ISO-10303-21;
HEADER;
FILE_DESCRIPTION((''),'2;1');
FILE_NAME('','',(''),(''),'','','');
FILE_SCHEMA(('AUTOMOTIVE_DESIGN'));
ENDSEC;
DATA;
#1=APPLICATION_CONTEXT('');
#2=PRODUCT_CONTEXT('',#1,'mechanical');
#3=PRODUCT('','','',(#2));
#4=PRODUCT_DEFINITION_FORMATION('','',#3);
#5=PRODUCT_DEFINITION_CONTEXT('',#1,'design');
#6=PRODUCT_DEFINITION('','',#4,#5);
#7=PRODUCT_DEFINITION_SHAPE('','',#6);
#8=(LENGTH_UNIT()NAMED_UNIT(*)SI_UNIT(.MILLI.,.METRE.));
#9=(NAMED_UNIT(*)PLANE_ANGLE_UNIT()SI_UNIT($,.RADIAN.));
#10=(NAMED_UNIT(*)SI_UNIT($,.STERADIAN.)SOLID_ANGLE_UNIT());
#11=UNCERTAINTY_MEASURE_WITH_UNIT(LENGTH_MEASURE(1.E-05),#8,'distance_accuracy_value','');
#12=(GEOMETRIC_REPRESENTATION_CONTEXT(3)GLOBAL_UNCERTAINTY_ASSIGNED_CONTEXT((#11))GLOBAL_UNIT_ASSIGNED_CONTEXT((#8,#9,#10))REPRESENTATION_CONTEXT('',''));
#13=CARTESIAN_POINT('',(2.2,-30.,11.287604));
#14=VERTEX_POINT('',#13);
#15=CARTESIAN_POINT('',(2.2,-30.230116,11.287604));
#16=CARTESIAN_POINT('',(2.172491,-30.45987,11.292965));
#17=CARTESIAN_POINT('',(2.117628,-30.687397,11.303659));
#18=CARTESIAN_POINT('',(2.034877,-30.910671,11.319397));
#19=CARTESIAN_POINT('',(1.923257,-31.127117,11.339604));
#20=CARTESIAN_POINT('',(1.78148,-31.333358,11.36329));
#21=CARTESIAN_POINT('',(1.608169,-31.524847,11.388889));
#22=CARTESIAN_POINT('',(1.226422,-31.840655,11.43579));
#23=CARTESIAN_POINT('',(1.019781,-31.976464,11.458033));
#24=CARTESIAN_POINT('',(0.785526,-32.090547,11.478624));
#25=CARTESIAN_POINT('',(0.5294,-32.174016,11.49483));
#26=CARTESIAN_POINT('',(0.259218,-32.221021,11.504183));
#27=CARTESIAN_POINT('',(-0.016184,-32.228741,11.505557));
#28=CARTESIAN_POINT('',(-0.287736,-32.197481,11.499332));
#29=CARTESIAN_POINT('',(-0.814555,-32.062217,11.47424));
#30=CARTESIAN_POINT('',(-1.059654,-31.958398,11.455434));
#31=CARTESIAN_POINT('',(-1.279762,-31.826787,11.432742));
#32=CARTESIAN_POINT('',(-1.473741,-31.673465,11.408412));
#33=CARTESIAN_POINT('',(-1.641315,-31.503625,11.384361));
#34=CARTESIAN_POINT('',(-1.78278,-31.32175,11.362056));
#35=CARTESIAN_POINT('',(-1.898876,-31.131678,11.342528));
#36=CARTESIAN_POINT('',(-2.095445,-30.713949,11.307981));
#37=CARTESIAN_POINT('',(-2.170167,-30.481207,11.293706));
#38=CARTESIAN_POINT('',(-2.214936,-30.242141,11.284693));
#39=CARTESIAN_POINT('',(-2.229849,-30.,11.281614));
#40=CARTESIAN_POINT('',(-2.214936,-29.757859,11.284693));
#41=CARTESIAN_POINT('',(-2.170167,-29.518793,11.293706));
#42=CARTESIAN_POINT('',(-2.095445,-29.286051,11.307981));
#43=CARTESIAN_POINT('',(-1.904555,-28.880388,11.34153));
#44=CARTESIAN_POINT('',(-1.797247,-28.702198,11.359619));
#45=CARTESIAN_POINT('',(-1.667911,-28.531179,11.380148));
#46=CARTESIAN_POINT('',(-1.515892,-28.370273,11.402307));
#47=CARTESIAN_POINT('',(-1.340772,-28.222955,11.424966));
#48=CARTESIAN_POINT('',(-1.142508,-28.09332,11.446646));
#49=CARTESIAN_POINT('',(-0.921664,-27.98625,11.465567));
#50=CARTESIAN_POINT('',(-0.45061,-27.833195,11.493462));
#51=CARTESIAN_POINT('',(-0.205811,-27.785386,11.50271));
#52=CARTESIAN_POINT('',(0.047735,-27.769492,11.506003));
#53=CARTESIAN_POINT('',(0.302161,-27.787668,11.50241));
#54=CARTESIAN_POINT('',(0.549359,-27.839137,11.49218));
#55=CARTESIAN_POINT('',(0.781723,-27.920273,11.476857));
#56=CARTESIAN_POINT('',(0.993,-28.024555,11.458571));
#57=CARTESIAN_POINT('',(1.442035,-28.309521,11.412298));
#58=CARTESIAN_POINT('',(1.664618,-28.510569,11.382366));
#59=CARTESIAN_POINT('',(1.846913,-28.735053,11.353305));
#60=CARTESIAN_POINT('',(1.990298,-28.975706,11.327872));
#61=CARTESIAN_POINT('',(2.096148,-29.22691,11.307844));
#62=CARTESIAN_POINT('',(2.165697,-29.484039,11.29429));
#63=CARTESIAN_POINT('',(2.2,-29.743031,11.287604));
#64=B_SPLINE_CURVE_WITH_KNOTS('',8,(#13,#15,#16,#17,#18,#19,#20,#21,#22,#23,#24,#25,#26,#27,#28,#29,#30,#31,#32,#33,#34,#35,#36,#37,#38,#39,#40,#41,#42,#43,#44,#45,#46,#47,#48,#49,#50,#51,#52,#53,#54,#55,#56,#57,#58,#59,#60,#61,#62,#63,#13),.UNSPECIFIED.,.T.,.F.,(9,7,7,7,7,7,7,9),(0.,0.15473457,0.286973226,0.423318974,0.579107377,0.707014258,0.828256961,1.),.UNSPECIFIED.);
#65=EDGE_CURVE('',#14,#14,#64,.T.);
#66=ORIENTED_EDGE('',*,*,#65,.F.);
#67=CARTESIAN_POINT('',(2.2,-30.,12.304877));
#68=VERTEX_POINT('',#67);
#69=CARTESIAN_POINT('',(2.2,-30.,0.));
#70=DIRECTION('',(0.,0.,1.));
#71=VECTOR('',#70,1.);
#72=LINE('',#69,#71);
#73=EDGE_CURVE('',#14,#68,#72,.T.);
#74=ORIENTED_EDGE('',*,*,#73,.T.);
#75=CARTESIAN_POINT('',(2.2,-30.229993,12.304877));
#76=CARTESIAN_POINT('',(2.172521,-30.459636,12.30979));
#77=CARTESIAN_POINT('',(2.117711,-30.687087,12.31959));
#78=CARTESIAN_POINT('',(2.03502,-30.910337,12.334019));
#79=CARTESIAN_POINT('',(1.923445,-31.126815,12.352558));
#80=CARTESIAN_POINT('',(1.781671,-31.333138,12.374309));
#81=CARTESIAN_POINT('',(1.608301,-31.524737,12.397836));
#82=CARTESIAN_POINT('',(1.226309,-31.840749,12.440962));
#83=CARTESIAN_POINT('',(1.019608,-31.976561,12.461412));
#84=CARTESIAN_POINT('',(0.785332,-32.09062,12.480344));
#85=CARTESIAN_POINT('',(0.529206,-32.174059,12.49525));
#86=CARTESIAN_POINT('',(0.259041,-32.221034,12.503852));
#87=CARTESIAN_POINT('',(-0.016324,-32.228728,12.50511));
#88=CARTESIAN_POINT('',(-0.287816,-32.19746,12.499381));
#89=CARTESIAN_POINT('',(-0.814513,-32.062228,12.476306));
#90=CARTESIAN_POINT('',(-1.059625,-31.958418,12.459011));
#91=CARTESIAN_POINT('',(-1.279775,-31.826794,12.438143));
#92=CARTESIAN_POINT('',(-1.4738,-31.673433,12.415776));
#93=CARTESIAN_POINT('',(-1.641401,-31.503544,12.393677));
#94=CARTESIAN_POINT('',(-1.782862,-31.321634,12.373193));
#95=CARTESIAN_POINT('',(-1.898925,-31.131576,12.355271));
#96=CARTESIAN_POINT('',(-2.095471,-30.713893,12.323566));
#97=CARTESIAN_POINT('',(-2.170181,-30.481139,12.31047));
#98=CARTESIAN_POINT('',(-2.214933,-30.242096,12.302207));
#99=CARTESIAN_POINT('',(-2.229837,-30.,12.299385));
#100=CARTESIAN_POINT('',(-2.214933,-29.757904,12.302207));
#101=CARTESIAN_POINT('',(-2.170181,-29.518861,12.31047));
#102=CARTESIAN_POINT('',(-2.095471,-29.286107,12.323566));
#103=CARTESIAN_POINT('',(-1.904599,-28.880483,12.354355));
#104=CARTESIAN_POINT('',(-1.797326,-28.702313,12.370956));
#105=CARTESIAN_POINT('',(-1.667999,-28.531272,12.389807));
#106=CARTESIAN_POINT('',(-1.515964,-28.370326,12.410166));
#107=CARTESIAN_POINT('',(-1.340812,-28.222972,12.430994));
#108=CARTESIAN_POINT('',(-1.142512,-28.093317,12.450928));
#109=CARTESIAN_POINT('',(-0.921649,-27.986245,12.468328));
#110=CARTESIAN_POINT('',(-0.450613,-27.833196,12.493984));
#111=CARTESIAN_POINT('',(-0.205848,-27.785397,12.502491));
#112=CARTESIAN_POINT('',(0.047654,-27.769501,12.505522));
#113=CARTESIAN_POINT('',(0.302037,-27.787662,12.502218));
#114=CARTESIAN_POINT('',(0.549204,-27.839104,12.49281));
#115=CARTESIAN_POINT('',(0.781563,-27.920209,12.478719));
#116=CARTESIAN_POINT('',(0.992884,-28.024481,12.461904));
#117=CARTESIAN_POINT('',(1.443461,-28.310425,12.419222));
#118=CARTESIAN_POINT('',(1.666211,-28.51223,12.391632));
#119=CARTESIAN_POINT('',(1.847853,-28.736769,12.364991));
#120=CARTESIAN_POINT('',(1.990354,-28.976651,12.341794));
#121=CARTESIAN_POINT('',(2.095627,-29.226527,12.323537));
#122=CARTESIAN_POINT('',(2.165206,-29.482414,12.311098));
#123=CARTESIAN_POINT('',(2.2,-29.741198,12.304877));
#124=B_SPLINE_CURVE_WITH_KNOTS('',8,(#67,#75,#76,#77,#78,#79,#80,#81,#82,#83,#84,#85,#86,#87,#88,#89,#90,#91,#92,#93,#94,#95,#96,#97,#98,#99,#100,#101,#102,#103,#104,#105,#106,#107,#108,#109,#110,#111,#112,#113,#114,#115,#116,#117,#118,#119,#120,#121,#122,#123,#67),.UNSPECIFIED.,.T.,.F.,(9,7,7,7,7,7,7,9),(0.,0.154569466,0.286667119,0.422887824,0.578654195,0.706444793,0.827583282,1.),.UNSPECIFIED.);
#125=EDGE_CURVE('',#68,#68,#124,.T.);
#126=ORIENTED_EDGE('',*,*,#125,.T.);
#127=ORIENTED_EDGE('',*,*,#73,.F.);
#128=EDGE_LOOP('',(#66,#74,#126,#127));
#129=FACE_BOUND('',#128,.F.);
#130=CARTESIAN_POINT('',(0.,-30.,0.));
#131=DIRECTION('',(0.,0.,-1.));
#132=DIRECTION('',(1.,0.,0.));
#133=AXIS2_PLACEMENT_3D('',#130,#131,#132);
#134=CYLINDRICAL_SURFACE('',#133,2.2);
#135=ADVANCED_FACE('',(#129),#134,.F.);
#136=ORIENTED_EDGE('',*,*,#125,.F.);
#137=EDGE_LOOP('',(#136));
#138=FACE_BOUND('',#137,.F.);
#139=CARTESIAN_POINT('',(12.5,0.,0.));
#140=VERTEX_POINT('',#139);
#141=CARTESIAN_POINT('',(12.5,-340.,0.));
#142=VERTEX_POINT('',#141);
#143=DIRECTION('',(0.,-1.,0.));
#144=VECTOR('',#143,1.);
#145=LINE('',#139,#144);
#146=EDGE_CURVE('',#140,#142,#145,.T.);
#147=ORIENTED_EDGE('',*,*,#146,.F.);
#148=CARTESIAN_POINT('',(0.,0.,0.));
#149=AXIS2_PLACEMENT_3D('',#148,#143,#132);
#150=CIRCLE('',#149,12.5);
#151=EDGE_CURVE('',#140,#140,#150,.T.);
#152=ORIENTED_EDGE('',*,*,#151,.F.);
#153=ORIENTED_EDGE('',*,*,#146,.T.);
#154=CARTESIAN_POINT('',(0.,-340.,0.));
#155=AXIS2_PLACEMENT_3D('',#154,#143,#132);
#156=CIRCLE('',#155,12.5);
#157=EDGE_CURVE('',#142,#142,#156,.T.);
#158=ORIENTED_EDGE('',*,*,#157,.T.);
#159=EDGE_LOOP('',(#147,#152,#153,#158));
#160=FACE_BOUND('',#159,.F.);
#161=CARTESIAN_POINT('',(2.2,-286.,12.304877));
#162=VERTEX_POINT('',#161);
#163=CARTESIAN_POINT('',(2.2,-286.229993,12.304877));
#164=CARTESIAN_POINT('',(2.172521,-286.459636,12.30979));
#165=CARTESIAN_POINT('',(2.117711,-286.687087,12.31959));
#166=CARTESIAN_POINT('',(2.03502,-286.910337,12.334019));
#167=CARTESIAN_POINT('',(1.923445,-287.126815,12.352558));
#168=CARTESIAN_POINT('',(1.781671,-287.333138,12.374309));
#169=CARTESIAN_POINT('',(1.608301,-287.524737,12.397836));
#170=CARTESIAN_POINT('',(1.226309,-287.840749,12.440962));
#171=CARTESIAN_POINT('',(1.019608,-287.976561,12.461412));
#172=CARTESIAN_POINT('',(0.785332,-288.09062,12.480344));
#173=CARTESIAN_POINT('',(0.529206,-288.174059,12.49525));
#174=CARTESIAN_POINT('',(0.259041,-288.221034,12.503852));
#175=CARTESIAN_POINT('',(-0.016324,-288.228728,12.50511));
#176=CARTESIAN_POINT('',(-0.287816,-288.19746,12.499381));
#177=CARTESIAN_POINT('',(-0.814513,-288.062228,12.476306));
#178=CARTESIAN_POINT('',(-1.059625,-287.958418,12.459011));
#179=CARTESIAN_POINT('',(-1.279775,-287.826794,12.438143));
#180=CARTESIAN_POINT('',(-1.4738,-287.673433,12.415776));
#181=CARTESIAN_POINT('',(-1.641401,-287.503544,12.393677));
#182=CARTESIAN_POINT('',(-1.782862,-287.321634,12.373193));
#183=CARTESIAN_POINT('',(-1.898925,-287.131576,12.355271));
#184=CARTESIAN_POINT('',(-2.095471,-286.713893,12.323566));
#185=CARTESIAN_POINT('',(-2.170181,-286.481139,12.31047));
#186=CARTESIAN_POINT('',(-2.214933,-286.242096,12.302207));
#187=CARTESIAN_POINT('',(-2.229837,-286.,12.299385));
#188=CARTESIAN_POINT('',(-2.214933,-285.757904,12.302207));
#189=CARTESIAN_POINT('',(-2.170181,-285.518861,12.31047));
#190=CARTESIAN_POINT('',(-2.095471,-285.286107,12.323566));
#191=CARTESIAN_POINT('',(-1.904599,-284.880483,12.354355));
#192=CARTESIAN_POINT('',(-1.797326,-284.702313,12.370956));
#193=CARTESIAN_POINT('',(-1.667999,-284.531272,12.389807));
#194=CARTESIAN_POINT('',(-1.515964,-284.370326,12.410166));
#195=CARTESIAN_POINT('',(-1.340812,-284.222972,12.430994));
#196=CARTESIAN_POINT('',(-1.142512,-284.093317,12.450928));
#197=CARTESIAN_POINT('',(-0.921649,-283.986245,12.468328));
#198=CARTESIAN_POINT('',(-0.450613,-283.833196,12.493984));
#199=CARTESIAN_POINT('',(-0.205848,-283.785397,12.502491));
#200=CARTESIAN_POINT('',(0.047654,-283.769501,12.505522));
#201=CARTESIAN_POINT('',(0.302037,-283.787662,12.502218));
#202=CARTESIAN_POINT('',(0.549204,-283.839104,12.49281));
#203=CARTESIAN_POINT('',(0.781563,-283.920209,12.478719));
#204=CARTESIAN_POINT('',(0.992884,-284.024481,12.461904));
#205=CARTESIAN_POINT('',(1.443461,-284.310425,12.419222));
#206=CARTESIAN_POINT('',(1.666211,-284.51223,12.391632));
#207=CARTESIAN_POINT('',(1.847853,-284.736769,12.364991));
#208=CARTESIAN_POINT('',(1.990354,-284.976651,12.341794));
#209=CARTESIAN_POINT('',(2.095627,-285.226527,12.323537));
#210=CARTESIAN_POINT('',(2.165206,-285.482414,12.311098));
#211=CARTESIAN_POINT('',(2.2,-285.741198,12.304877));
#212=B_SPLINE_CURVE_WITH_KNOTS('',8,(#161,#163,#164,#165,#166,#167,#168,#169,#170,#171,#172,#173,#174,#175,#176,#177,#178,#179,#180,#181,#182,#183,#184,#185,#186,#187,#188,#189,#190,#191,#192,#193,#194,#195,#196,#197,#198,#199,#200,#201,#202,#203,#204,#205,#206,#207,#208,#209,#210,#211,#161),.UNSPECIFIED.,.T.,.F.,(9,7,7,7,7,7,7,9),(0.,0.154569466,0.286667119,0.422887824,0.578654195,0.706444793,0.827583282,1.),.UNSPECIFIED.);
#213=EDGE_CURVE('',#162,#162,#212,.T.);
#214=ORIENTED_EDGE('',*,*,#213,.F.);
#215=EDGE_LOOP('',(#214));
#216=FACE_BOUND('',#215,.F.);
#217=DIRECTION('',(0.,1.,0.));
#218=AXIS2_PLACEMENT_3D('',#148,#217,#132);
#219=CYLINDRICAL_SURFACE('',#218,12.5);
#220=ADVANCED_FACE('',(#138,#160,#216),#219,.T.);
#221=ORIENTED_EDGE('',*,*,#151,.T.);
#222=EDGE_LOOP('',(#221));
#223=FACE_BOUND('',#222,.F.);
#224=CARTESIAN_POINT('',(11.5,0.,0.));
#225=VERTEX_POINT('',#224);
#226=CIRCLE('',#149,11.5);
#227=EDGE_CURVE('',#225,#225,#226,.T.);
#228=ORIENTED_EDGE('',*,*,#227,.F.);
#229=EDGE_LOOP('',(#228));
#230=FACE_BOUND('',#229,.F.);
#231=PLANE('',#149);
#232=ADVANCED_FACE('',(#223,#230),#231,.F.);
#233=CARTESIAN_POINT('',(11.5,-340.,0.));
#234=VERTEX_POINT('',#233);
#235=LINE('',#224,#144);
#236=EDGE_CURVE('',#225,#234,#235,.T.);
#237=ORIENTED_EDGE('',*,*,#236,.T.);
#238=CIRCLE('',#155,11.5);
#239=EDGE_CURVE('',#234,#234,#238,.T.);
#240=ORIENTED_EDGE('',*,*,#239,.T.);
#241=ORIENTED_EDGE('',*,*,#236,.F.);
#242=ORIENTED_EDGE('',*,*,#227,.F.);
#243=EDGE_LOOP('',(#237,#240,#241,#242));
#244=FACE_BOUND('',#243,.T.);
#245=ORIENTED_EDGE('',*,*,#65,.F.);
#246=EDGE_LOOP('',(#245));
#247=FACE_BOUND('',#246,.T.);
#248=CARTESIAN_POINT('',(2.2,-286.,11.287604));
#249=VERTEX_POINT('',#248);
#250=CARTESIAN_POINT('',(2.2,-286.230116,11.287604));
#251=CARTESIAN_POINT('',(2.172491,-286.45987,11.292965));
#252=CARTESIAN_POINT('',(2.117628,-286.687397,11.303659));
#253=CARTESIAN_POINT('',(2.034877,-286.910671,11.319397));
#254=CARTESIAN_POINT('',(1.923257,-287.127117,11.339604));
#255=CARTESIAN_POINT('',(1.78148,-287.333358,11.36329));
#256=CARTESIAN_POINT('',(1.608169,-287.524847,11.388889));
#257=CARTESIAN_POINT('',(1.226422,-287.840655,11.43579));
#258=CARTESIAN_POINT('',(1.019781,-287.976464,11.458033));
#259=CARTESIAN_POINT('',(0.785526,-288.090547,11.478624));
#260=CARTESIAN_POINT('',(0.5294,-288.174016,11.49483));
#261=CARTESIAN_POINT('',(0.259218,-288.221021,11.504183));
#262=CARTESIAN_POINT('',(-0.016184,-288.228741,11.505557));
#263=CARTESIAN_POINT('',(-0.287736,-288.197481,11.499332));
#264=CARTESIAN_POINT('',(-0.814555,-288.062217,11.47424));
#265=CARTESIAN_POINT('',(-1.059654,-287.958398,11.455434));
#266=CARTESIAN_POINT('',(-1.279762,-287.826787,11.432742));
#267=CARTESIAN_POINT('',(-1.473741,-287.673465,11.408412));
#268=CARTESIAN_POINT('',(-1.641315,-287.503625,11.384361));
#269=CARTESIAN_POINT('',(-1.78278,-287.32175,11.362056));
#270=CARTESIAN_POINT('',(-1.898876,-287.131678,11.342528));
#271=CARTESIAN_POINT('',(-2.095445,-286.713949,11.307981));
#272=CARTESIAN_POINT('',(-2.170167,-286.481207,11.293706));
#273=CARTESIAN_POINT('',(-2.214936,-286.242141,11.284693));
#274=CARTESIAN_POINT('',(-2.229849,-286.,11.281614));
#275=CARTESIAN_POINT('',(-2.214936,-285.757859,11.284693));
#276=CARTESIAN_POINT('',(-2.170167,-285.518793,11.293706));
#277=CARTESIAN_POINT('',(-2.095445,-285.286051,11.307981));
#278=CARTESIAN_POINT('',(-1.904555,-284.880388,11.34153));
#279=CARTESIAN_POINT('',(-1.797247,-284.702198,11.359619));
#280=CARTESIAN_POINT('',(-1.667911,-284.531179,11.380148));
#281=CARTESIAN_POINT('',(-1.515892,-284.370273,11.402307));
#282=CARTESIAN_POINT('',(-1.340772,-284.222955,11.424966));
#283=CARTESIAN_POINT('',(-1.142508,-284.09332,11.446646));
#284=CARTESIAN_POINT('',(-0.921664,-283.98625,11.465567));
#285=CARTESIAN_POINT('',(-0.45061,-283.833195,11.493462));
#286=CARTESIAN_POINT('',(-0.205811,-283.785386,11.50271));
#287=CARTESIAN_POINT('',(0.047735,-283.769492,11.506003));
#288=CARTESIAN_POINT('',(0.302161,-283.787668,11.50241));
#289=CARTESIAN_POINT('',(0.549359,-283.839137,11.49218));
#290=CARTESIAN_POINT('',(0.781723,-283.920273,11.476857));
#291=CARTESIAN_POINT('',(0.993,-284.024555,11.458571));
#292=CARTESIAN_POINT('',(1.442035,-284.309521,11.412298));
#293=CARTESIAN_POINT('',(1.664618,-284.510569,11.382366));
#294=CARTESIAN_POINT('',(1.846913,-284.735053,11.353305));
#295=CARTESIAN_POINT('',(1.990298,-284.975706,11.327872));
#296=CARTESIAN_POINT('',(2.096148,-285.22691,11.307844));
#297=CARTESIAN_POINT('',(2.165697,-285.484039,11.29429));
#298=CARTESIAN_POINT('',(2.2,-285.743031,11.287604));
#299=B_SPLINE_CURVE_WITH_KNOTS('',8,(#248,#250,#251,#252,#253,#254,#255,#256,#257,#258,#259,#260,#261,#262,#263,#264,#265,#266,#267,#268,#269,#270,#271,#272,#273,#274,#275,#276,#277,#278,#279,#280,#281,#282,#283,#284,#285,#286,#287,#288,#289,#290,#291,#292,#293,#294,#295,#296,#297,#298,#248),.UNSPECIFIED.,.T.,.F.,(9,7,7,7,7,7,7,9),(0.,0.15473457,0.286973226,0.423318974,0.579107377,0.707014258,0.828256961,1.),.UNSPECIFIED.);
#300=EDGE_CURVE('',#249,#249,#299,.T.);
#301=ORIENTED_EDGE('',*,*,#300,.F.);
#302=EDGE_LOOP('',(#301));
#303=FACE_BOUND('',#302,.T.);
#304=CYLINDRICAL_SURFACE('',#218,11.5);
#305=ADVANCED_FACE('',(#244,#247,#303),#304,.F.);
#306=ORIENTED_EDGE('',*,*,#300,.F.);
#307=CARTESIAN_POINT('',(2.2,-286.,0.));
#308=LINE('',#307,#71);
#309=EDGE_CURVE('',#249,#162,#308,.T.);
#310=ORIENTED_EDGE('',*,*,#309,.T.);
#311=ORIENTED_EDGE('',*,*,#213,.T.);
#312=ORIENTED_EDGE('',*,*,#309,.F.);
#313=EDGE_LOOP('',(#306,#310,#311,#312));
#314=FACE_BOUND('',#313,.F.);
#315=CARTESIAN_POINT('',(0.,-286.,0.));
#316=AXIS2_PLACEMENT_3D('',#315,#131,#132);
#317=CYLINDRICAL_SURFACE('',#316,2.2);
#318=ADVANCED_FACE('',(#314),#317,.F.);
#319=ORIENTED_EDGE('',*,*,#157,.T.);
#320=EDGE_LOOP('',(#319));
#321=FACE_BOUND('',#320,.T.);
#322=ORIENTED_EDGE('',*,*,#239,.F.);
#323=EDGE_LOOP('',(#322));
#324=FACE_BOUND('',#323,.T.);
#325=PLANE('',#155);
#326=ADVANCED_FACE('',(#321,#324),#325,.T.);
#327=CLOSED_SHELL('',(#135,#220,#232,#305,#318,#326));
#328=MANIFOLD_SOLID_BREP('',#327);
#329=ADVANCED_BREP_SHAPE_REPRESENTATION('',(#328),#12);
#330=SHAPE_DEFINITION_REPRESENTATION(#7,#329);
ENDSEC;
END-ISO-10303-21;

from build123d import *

# Parameters (mm, degrees)
F0_R     = 12.5
F0_R_2   = 11.5
F1_DEPTH = 340
F3_D     = 4.4
F3_DEPTH = 12.501


# Not quite as in the source:
# - a feature names something its author has since deleted; it is built from what else it names


with BuildPart() as f1:
    # F0 (on Front) → F1 (new body)
    with BuildSketch(Plane.XZ):
        Circle(F0_R)
        Circle(F0_R_2, mode=Mode.SUBTRACT)
    extrude(amount=F1_DEPTH)

    # F3 (through all, one way)
    with BuildSketch(Plane(origin=(0, 0, 0), x_dir=(1, 0, 0), z_dir=(0, 0, -1))):
        with Locations((0, 30), (0, 286)):
            Circle(F3_D / 2)
    extrude(amount=-F3_DEPTH, mode=Mode.SUBTRACT)


solid = f1.part
